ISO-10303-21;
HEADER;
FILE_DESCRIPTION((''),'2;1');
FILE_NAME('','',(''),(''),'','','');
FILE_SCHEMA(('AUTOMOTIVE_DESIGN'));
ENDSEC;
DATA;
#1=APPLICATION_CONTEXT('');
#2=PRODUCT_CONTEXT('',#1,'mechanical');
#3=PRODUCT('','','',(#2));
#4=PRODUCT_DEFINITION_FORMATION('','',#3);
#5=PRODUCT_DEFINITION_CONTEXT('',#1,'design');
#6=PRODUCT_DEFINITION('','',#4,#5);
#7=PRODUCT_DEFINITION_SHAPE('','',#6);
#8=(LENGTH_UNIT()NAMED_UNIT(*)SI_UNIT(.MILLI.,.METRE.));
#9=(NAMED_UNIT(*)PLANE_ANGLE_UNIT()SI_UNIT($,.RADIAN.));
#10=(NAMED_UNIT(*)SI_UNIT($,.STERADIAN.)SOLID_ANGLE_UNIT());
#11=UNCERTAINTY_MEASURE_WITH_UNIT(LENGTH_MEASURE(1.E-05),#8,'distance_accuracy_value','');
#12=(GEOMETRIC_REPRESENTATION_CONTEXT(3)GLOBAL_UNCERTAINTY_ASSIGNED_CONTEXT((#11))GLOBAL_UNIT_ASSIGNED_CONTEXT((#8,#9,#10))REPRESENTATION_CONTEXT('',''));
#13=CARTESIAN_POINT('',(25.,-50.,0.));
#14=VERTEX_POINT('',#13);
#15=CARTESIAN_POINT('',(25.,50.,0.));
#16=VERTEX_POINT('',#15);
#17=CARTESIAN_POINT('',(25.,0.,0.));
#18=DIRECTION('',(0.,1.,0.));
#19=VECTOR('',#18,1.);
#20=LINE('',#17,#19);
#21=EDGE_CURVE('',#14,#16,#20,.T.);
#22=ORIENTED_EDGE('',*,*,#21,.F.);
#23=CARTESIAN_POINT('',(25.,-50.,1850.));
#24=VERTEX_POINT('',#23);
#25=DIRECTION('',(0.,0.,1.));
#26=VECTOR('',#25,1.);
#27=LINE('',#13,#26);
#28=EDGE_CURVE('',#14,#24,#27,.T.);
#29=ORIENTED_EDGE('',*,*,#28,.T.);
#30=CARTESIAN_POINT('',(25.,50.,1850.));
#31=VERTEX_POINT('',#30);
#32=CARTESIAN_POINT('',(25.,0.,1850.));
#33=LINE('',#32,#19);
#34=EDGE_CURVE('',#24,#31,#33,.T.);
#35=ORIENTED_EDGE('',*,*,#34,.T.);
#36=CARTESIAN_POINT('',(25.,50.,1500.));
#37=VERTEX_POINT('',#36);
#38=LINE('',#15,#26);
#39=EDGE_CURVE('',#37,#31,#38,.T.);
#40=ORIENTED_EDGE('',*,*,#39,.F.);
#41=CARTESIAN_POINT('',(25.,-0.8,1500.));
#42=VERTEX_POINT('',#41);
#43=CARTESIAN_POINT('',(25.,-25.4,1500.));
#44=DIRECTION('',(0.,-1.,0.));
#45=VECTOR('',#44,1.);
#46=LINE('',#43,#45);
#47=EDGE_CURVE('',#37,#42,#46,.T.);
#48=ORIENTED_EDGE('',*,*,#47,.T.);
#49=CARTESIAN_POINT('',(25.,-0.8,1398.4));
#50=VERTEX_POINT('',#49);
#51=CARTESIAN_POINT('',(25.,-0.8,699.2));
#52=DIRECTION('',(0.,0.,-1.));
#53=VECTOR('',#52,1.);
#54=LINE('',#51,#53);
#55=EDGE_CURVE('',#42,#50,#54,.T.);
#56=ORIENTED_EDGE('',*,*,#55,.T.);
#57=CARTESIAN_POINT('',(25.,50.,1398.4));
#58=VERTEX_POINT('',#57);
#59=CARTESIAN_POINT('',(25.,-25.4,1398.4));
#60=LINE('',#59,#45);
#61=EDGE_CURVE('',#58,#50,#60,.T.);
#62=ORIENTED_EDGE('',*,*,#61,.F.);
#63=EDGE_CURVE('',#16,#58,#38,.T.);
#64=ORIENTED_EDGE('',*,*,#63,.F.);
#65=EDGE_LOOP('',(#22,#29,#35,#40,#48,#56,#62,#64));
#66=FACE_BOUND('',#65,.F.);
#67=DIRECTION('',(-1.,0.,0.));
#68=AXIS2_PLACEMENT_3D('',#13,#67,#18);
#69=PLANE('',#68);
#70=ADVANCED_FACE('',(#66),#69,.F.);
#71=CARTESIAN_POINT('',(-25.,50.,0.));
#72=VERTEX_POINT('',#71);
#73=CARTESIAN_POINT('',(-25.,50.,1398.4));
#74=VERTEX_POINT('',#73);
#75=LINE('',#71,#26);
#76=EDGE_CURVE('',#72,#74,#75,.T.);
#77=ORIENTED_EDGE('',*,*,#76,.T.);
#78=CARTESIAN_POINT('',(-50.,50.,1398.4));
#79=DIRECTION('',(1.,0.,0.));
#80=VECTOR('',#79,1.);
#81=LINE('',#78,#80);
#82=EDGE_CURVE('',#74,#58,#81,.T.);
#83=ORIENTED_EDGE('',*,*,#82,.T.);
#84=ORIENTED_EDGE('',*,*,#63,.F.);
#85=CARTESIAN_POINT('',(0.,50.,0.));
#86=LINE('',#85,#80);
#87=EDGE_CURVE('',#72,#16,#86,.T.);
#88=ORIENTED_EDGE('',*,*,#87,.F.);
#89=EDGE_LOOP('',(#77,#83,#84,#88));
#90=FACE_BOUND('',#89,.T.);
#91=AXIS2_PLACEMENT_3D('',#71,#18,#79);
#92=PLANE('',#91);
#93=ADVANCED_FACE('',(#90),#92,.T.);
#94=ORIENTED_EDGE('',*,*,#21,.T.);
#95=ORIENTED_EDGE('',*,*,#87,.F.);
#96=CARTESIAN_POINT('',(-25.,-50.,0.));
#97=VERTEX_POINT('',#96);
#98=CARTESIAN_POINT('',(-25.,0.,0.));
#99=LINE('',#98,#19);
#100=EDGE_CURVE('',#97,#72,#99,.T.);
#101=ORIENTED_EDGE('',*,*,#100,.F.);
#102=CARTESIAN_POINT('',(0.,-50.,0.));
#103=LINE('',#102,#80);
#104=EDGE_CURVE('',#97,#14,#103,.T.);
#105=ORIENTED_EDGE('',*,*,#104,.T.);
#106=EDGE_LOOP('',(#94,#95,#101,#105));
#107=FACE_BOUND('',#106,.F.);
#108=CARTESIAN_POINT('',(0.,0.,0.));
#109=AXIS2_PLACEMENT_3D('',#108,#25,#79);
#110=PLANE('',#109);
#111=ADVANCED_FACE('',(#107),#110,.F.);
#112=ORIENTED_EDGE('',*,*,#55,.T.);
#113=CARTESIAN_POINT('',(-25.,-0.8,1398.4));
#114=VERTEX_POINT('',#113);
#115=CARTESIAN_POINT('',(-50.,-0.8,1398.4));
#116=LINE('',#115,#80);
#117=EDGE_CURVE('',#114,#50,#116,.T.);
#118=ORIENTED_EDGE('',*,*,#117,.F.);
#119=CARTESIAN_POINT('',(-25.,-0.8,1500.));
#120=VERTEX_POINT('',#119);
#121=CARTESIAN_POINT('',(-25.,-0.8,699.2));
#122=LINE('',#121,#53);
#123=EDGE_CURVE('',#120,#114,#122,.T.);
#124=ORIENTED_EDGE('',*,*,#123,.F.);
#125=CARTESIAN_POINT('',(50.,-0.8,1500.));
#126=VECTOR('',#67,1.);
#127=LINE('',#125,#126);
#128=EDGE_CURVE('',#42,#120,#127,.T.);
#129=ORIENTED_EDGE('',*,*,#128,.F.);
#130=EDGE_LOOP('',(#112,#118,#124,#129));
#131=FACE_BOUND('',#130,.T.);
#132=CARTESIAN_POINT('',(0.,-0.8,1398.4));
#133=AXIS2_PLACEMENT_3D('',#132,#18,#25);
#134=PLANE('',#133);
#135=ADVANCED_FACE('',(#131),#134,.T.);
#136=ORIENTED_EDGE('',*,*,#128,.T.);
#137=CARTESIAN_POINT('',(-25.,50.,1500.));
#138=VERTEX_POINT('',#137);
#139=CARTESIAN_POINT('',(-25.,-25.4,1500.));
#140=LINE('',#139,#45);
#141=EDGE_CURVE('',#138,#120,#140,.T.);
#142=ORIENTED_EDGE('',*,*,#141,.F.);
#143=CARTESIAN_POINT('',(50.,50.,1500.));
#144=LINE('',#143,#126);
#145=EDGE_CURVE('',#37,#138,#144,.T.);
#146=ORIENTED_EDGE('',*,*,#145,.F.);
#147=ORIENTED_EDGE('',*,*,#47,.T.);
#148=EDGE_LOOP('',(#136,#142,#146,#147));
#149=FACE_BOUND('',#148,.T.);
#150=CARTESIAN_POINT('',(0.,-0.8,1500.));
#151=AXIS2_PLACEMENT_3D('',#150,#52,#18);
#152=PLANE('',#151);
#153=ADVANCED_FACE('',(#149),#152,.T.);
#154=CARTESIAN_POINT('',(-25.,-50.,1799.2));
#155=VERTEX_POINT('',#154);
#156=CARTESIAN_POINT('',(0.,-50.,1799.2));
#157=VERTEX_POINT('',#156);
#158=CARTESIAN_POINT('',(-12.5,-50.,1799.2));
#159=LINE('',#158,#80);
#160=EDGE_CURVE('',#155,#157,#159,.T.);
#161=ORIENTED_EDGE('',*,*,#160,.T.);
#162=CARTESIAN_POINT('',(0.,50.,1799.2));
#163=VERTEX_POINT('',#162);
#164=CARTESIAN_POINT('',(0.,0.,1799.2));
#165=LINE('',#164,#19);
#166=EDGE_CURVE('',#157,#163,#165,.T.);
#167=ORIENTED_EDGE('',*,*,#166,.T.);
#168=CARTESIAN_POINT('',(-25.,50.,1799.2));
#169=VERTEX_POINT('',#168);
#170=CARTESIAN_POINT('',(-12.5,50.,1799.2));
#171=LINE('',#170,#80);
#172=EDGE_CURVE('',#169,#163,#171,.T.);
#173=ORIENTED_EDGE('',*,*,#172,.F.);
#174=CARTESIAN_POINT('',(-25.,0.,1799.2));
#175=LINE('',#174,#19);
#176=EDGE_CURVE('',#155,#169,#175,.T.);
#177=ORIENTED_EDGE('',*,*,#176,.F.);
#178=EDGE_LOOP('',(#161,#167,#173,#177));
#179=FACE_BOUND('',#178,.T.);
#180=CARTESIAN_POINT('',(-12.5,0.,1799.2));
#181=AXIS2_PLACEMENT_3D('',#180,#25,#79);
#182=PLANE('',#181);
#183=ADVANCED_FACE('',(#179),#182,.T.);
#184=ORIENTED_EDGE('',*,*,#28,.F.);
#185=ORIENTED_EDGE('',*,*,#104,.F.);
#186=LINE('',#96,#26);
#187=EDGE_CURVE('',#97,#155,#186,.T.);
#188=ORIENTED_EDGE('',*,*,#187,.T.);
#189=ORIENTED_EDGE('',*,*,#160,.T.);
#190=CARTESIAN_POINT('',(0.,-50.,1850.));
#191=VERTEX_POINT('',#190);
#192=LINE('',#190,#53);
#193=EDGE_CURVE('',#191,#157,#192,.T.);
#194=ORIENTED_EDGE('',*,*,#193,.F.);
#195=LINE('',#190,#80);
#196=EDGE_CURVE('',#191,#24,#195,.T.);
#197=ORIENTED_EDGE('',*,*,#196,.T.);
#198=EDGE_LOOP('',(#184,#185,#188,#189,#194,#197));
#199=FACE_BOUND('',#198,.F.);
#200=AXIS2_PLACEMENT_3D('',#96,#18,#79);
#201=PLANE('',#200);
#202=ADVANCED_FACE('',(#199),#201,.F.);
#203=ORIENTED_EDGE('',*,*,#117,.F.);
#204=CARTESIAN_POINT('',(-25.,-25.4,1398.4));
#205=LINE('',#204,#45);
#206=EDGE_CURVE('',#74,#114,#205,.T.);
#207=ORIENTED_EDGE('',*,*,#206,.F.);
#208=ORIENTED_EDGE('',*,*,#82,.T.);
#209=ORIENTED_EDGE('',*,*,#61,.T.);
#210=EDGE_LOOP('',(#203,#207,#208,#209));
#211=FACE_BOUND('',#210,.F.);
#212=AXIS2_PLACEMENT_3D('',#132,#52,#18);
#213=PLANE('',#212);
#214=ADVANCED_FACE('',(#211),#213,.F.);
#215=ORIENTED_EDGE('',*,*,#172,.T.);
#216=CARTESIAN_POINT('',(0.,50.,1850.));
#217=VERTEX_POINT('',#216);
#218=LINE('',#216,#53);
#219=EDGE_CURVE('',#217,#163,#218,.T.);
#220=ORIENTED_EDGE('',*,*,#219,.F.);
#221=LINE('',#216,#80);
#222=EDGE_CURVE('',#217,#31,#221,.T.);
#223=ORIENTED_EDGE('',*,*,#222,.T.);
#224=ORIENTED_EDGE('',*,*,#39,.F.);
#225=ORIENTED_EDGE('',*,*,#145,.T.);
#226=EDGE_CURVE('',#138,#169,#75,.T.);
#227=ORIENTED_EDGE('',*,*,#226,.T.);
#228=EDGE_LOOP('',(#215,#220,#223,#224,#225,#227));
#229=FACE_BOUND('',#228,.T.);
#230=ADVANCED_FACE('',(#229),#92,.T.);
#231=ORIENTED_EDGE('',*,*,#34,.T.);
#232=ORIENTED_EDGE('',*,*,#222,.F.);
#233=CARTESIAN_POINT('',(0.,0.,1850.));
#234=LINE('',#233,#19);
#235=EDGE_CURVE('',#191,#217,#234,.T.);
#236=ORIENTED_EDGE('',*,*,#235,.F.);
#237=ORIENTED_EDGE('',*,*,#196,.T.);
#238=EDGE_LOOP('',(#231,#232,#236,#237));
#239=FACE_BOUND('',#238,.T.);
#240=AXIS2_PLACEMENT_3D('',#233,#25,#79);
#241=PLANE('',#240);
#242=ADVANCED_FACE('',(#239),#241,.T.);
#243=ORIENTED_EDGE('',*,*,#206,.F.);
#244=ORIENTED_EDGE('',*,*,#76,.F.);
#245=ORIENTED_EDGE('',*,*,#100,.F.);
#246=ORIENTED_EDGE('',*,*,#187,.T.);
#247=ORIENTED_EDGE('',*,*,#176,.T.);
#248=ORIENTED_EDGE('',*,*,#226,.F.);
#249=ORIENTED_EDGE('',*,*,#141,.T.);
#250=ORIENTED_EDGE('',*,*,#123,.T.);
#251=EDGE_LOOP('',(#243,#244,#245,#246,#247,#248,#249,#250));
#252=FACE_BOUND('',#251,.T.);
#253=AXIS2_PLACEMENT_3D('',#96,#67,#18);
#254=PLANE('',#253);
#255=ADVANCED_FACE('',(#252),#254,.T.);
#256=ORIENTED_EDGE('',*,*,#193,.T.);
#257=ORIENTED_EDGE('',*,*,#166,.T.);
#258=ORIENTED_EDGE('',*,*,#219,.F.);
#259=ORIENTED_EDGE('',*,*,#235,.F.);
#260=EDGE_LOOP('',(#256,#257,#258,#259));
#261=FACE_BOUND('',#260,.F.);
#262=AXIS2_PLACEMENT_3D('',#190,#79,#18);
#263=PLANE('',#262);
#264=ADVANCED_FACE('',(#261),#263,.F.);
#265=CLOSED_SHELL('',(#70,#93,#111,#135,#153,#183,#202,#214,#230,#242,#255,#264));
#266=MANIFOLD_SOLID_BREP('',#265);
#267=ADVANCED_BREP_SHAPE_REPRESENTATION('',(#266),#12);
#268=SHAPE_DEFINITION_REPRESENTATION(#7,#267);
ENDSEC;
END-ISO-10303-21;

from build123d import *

# Parameters (mm, degrees)
F0_W     = 50
F0_H     = 100
F1_DEPTH = 1850
F2_W     = 50.8
F2_H     = 101.6
F3_DEPTH = 50
F4_W     = 25
F4_H     = 100
F5_DEPTH = 50.8


# Not quite as in the source:
# - a feature names something its author has since deleted; it is built from what else it names


with BuildPart() as f1:
    # F0 (on Top) → F1 (new body)
    with BuildSketch(Plane.XY):
        Rectangle(F0_W, F0_H)
    extrude(amount=F1_DEPTH)

    # F2 (on Right) → F3 (cut, symmetric)
    with BuildSketch(Plane.YZ):
        with Locations((24.6, 1449.2)):
            Rectangle(F2_W, F2_H)
    extrude(amount=F3_DEPTH, both=True, mode=Mode.SUBTRACT)

    # F4 (on face) → F5 (cut)
    with BuildSketch(Plane.XY.offset(1850)):
        with Locations((-12.5, 0)):
            Rectangle(F4_W, F4_H)
    extrude(amount=-F5_DEPTH, mode=Mode.SUBTRACT)


solid = f1.part
